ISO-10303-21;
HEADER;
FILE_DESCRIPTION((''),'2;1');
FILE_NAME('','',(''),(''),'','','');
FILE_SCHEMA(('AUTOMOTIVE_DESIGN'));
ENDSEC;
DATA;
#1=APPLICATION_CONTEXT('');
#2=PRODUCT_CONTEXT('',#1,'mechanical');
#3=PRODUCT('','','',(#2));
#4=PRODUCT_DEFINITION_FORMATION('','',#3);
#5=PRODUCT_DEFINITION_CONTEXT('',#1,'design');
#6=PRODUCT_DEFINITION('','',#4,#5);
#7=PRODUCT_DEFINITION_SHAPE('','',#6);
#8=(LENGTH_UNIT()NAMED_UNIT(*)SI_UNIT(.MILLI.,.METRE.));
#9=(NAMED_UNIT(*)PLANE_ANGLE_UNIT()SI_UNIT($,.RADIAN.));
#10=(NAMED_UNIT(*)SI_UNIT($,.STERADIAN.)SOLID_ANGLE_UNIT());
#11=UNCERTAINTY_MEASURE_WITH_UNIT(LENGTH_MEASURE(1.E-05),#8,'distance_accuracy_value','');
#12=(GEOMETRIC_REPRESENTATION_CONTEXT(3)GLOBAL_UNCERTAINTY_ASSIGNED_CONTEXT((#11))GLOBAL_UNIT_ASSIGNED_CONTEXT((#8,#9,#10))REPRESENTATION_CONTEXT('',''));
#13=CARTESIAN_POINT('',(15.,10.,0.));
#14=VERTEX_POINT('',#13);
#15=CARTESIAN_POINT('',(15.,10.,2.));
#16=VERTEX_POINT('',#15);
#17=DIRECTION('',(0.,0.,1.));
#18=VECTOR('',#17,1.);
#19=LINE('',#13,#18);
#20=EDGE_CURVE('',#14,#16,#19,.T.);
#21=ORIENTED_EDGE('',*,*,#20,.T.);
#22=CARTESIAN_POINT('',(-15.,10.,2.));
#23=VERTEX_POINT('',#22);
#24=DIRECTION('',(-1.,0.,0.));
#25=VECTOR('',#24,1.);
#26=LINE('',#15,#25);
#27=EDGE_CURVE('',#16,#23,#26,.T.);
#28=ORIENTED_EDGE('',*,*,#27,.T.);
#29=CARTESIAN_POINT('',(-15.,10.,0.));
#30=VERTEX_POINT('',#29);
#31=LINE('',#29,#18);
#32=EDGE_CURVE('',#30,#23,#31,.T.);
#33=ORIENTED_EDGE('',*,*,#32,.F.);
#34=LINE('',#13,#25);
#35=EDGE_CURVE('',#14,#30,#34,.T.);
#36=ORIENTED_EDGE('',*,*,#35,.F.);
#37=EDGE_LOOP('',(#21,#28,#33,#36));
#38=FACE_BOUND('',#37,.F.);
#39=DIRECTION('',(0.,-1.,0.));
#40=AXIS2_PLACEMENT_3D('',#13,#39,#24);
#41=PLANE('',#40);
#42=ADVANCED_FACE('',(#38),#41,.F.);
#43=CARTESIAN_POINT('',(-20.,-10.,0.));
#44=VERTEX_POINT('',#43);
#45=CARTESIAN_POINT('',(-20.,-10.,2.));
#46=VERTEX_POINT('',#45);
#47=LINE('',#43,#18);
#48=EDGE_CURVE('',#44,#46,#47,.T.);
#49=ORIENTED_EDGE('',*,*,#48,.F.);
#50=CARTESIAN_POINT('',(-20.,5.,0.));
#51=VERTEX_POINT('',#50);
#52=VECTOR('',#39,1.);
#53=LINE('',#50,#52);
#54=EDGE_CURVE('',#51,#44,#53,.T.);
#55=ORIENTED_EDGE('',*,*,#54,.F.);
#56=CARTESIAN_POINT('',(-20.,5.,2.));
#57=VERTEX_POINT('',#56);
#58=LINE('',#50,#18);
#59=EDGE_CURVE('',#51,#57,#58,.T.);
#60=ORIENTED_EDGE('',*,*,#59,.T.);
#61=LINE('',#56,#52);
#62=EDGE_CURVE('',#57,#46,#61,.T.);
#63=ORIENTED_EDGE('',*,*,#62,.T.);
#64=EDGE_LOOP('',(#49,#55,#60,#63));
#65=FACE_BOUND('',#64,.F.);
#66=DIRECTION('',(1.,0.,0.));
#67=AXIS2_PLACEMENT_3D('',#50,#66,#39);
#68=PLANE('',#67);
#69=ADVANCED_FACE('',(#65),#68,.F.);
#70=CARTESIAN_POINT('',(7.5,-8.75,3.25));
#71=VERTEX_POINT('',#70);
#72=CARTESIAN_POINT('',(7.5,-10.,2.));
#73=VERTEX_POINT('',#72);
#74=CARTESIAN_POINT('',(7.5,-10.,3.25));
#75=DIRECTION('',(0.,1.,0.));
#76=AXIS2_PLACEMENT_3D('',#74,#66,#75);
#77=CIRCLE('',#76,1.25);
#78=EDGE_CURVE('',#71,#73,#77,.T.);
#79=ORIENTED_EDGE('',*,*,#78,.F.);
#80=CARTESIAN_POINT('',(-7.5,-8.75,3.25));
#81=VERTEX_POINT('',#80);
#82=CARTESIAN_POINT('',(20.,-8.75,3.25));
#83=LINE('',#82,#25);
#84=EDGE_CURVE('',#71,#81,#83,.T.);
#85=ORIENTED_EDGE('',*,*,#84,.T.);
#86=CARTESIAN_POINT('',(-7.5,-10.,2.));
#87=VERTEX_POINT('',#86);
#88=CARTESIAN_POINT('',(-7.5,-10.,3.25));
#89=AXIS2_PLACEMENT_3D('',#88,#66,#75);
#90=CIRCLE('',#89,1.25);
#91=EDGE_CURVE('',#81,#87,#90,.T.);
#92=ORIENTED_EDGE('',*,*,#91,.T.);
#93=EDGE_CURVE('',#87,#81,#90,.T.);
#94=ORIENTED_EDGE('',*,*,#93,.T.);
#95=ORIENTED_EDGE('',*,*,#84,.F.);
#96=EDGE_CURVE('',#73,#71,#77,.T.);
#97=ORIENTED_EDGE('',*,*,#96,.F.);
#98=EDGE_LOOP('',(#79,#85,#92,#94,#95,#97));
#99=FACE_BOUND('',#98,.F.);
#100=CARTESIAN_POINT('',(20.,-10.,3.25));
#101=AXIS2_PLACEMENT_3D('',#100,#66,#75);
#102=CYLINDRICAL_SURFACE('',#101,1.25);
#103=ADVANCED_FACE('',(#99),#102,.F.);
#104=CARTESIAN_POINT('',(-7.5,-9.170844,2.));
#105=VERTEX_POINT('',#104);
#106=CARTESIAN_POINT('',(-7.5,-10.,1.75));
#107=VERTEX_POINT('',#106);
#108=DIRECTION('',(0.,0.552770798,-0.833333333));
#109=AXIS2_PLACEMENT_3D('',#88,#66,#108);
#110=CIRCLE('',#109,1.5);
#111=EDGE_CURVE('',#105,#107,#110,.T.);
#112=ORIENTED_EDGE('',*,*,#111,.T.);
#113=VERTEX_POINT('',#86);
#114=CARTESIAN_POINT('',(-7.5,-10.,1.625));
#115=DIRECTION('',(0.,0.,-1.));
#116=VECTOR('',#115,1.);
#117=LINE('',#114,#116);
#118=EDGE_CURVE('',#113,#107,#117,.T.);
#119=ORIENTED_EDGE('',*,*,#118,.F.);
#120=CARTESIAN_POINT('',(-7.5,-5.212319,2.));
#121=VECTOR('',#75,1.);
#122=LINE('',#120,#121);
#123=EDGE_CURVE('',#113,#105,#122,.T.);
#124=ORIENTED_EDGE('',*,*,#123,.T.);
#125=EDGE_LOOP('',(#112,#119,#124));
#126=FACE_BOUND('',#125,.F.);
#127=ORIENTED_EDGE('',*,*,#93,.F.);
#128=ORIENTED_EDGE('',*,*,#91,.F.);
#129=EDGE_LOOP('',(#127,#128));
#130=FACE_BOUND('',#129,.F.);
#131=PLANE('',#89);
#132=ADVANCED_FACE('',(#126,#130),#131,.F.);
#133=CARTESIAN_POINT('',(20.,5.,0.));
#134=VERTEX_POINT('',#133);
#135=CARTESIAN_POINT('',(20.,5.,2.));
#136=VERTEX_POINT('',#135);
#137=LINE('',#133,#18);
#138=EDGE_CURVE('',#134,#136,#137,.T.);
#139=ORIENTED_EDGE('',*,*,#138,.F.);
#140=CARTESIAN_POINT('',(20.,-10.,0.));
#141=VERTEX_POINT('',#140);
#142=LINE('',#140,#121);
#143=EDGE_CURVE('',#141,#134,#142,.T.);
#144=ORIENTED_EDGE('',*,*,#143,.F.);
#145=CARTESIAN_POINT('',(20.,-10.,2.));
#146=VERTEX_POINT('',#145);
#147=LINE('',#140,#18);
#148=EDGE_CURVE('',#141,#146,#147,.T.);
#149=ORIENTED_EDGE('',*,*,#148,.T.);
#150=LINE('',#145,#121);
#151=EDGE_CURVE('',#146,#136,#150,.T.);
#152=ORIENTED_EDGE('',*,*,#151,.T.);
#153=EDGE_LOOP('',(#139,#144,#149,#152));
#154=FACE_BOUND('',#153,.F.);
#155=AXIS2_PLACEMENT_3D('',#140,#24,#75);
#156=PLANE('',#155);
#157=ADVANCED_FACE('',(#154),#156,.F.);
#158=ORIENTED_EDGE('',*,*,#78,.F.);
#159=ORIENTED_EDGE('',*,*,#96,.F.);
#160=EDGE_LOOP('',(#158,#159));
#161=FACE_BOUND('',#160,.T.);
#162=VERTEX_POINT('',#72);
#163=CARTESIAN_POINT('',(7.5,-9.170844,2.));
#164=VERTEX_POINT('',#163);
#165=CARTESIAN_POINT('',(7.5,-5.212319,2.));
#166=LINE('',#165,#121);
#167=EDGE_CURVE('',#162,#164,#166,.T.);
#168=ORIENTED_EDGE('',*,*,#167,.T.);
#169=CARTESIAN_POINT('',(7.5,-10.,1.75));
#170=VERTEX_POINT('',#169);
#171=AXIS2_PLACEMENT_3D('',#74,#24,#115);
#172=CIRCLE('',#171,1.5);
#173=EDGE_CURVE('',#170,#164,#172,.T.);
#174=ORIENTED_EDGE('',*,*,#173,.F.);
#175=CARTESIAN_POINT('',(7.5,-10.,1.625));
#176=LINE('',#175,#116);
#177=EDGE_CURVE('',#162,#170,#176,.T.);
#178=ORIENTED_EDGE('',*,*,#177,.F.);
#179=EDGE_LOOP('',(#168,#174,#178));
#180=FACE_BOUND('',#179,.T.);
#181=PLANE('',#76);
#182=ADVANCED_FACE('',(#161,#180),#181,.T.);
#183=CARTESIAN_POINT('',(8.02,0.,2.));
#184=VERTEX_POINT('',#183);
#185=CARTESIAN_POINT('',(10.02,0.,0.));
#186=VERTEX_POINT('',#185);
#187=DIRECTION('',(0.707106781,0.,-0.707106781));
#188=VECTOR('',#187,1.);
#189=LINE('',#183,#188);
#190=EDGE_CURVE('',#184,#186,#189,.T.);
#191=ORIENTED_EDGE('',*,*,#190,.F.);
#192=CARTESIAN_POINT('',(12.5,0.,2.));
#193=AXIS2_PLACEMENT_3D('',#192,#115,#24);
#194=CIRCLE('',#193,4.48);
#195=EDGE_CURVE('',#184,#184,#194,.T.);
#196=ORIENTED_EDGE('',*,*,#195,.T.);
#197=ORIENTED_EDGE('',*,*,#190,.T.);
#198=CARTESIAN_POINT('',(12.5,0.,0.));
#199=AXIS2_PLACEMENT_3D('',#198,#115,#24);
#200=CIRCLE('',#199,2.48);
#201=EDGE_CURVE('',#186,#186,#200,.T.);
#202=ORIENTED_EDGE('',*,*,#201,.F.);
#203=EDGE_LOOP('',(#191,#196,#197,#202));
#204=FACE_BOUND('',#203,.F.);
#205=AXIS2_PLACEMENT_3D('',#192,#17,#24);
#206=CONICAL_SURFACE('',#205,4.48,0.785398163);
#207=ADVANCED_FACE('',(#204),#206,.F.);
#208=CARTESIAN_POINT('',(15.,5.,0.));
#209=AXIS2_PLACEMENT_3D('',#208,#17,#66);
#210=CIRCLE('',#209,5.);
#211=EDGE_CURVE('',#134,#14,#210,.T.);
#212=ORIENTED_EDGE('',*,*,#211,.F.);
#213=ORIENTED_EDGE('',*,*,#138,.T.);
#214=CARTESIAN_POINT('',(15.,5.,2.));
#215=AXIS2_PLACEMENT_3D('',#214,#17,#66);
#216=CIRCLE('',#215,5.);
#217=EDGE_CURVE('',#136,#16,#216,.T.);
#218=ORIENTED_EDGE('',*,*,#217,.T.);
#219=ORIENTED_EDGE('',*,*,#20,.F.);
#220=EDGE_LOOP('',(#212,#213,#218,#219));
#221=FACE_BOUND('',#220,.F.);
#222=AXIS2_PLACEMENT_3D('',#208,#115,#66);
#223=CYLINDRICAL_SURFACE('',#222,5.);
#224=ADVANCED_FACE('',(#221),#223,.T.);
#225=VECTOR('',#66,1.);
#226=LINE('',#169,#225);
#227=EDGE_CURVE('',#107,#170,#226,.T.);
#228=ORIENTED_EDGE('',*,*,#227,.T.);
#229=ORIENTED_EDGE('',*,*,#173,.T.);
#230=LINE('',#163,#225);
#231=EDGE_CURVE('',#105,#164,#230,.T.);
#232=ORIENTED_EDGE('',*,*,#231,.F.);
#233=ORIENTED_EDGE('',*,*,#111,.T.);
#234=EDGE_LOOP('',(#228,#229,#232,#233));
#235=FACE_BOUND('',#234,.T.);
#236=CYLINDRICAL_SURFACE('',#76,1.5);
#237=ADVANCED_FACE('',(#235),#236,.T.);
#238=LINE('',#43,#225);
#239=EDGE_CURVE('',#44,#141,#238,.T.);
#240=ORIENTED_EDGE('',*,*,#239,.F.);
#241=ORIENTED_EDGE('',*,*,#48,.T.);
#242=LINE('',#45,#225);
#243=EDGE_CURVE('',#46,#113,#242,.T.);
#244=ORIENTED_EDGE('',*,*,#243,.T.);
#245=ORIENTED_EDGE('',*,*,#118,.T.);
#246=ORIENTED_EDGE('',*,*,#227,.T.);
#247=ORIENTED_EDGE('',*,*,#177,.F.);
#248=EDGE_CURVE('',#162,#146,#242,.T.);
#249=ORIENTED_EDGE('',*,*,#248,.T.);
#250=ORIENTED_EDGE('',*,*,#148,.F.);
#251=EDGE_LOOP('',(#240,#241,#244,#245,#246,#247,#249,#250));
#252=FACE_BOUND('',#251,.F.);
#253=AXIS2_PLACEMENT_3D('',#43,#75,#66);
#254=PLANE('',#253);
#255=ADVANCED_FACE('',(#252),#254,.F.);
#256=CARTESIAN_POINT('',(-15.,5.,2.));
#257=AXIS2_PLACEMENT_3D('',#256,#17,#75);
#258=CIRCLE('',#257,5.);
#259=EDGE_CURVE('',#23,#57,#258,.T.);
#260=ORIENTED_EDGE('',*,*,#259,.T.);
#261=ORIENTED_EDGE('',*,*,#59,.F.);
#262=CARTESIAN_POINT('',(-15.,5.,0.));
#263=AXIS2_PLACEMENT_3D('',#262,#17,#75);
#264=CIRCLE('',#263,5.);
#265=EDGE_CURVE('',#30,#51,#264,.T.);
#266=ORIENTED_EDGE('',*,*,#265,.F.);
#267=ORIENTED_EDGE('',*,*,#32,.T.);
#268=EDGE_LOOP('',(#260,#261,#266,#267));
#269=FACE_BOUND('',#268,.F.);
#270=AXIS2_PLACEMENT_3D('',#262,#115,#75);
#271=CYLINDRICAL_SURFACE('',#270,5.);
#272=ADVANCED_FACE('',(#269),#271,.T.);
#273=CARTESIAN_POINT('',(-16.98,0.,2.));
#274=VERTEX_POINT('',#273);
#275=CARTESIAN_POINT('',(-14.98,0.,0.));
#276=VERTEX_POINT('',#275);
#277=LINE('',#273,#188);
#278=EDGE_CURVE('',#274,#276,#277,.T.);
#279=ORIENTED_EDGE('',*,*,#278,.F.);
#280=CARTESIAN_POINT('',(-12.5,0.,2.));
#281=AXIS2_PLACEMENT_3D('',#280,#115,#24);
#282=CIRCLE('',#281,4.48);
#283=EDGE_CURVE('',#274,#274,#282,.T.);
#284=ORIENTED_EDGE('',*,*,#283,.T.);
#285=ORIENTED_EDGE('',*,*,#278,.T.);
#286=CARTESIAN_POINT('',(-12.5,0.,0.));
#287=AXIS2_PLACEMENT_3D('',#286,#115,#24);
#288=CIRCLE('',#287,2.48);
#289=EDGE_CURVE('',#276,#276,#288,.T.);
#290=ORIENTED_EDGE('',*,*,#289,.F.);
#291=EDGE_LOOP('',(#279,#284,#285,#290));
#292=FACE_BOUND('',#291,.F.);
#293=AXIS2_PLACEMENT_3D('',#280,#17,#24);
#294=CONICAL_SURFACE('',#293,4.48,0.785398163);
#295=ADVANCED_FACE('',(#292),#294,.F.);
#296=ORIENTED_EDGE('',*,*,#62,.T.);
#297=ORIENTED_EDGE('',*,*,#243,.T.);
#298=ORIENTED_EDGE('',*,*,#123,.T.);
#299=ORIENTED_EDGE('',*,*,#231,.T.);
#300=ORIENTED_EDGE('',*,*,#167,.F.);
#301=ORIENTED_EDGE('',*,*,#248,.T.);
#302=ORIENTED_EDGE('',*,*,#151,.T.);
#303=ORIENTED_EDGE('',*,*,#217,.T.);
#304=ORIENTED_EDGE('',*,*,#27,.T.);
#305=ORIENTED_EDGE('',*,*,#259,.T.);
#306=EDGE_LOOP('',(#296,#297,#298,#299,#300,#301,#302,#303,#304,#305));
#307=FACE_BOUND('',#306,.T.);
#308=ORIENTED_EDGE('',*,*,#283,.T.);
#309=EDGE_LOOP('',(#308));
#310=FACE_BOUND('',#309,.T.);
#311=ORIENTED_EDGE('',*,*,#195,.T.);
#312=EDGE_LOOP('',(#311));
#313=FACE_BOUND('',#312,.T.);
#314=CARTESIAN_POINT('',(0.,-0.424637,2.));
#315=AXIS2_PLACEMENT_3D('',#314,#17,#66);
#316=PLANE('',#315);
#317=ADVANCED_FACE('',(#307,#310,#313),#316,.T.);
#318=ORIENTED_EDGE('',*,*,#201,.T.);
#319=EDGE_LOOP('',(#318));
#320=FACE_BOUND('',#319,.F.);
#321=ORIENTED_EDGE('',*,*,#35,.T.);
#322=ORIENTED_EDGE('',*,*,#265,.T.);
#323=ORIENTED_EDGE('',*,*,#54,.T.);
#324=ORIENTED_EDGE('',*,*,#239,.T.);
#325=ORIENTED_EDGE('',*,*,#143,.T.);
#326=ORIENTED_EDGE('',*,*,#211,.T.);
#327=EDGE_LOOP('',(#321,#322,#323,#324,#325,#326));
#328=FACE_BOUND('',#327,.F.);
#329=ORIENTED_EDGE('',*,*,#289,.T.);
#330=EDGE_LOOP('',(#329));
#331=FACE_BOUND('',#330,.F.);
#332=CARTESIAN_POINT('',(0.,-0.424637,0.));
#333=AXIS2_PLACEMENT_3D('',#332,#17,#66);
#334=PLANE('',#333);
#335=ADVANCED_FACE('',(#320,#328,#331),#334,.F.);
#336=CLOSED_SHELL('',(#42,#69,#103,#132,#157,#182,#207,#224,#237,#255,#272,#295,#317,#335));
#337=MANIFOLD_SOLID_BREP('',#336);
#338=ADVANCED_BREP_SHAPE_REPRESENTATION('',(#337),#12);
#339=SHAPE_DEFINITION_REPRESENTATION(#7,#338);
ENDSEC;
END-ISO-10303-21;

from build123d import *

# Parameters (mm, degrees)
F1_DEPTH       = 2
F3_R           = 1.5
F5_DEPTH       = 15
F6_R           = 1.25
F7_DEPTH       = 66
F9_D           = 4.4
F9_DEPTH       = 14.1
F9_CSINK_D     = 8.96
F9_CSINK_ANGLE = 90
F9_TIP         = 1.3218933619


# Not quite as in the source:
# - an extrude ends at something that could not be found from the text; its depth is read off the source's solid


with BuildPart() as f1:
    # F0 (on Top) → F1 (new body)
    with BuildSketch(Plane.XY):
        with BuildLine():
            ThreePointArc((20, 5), (18.5355339059, 8.5355339059), (15, 10))
            Line((15, 10), (-15, 10))
            ThreePointArc((-15, 10), (-18.5355339059, 8.5355339059), (-20, 5))
            Line((-20, 5), (-20, -10))
            Line((-20, -10), (20, -10))
            Line((20, -10), (20, 5))
        make_face()
    extrude(amount=F1_DEPTH)

    # F3 (on offset) → F5 (join, through all)
    with BuildSketch(Plane.YZ.offset(7.5)):
        with Locations((-10, 3.25)):
            Circle(F3_R)
    extrude(amount=-F5_DEPTH)

    # F6 (on face) → F7 (cut, through all)
    with BuildSketch(Plane.YZ.offset(20)):
        with Locations((-10, 3.25)):
            Circle(F6_R)
    extrude(amount=-F7_DEPTH, mode=Mode.SUBTRACT)

    # F9
    with Locations(Plane.XY.offset(2)):
        with Locations((-12.5, 0), (12.5, 0)):
            CounterSinkHole(F9_D / 2, F9_CSINK_D / 2, depth=F9_DEPTH, counter_sink_angle=F9_CSINK_ANGLE)
            with Locations((0, 0, -(F9_DEPTH + F9_TIP / 2))):  # 118° drill point
                Cone(0, F9_D / 2, F9_TIP, mode=Mode.SUBTRACT)


solid = f1.part
